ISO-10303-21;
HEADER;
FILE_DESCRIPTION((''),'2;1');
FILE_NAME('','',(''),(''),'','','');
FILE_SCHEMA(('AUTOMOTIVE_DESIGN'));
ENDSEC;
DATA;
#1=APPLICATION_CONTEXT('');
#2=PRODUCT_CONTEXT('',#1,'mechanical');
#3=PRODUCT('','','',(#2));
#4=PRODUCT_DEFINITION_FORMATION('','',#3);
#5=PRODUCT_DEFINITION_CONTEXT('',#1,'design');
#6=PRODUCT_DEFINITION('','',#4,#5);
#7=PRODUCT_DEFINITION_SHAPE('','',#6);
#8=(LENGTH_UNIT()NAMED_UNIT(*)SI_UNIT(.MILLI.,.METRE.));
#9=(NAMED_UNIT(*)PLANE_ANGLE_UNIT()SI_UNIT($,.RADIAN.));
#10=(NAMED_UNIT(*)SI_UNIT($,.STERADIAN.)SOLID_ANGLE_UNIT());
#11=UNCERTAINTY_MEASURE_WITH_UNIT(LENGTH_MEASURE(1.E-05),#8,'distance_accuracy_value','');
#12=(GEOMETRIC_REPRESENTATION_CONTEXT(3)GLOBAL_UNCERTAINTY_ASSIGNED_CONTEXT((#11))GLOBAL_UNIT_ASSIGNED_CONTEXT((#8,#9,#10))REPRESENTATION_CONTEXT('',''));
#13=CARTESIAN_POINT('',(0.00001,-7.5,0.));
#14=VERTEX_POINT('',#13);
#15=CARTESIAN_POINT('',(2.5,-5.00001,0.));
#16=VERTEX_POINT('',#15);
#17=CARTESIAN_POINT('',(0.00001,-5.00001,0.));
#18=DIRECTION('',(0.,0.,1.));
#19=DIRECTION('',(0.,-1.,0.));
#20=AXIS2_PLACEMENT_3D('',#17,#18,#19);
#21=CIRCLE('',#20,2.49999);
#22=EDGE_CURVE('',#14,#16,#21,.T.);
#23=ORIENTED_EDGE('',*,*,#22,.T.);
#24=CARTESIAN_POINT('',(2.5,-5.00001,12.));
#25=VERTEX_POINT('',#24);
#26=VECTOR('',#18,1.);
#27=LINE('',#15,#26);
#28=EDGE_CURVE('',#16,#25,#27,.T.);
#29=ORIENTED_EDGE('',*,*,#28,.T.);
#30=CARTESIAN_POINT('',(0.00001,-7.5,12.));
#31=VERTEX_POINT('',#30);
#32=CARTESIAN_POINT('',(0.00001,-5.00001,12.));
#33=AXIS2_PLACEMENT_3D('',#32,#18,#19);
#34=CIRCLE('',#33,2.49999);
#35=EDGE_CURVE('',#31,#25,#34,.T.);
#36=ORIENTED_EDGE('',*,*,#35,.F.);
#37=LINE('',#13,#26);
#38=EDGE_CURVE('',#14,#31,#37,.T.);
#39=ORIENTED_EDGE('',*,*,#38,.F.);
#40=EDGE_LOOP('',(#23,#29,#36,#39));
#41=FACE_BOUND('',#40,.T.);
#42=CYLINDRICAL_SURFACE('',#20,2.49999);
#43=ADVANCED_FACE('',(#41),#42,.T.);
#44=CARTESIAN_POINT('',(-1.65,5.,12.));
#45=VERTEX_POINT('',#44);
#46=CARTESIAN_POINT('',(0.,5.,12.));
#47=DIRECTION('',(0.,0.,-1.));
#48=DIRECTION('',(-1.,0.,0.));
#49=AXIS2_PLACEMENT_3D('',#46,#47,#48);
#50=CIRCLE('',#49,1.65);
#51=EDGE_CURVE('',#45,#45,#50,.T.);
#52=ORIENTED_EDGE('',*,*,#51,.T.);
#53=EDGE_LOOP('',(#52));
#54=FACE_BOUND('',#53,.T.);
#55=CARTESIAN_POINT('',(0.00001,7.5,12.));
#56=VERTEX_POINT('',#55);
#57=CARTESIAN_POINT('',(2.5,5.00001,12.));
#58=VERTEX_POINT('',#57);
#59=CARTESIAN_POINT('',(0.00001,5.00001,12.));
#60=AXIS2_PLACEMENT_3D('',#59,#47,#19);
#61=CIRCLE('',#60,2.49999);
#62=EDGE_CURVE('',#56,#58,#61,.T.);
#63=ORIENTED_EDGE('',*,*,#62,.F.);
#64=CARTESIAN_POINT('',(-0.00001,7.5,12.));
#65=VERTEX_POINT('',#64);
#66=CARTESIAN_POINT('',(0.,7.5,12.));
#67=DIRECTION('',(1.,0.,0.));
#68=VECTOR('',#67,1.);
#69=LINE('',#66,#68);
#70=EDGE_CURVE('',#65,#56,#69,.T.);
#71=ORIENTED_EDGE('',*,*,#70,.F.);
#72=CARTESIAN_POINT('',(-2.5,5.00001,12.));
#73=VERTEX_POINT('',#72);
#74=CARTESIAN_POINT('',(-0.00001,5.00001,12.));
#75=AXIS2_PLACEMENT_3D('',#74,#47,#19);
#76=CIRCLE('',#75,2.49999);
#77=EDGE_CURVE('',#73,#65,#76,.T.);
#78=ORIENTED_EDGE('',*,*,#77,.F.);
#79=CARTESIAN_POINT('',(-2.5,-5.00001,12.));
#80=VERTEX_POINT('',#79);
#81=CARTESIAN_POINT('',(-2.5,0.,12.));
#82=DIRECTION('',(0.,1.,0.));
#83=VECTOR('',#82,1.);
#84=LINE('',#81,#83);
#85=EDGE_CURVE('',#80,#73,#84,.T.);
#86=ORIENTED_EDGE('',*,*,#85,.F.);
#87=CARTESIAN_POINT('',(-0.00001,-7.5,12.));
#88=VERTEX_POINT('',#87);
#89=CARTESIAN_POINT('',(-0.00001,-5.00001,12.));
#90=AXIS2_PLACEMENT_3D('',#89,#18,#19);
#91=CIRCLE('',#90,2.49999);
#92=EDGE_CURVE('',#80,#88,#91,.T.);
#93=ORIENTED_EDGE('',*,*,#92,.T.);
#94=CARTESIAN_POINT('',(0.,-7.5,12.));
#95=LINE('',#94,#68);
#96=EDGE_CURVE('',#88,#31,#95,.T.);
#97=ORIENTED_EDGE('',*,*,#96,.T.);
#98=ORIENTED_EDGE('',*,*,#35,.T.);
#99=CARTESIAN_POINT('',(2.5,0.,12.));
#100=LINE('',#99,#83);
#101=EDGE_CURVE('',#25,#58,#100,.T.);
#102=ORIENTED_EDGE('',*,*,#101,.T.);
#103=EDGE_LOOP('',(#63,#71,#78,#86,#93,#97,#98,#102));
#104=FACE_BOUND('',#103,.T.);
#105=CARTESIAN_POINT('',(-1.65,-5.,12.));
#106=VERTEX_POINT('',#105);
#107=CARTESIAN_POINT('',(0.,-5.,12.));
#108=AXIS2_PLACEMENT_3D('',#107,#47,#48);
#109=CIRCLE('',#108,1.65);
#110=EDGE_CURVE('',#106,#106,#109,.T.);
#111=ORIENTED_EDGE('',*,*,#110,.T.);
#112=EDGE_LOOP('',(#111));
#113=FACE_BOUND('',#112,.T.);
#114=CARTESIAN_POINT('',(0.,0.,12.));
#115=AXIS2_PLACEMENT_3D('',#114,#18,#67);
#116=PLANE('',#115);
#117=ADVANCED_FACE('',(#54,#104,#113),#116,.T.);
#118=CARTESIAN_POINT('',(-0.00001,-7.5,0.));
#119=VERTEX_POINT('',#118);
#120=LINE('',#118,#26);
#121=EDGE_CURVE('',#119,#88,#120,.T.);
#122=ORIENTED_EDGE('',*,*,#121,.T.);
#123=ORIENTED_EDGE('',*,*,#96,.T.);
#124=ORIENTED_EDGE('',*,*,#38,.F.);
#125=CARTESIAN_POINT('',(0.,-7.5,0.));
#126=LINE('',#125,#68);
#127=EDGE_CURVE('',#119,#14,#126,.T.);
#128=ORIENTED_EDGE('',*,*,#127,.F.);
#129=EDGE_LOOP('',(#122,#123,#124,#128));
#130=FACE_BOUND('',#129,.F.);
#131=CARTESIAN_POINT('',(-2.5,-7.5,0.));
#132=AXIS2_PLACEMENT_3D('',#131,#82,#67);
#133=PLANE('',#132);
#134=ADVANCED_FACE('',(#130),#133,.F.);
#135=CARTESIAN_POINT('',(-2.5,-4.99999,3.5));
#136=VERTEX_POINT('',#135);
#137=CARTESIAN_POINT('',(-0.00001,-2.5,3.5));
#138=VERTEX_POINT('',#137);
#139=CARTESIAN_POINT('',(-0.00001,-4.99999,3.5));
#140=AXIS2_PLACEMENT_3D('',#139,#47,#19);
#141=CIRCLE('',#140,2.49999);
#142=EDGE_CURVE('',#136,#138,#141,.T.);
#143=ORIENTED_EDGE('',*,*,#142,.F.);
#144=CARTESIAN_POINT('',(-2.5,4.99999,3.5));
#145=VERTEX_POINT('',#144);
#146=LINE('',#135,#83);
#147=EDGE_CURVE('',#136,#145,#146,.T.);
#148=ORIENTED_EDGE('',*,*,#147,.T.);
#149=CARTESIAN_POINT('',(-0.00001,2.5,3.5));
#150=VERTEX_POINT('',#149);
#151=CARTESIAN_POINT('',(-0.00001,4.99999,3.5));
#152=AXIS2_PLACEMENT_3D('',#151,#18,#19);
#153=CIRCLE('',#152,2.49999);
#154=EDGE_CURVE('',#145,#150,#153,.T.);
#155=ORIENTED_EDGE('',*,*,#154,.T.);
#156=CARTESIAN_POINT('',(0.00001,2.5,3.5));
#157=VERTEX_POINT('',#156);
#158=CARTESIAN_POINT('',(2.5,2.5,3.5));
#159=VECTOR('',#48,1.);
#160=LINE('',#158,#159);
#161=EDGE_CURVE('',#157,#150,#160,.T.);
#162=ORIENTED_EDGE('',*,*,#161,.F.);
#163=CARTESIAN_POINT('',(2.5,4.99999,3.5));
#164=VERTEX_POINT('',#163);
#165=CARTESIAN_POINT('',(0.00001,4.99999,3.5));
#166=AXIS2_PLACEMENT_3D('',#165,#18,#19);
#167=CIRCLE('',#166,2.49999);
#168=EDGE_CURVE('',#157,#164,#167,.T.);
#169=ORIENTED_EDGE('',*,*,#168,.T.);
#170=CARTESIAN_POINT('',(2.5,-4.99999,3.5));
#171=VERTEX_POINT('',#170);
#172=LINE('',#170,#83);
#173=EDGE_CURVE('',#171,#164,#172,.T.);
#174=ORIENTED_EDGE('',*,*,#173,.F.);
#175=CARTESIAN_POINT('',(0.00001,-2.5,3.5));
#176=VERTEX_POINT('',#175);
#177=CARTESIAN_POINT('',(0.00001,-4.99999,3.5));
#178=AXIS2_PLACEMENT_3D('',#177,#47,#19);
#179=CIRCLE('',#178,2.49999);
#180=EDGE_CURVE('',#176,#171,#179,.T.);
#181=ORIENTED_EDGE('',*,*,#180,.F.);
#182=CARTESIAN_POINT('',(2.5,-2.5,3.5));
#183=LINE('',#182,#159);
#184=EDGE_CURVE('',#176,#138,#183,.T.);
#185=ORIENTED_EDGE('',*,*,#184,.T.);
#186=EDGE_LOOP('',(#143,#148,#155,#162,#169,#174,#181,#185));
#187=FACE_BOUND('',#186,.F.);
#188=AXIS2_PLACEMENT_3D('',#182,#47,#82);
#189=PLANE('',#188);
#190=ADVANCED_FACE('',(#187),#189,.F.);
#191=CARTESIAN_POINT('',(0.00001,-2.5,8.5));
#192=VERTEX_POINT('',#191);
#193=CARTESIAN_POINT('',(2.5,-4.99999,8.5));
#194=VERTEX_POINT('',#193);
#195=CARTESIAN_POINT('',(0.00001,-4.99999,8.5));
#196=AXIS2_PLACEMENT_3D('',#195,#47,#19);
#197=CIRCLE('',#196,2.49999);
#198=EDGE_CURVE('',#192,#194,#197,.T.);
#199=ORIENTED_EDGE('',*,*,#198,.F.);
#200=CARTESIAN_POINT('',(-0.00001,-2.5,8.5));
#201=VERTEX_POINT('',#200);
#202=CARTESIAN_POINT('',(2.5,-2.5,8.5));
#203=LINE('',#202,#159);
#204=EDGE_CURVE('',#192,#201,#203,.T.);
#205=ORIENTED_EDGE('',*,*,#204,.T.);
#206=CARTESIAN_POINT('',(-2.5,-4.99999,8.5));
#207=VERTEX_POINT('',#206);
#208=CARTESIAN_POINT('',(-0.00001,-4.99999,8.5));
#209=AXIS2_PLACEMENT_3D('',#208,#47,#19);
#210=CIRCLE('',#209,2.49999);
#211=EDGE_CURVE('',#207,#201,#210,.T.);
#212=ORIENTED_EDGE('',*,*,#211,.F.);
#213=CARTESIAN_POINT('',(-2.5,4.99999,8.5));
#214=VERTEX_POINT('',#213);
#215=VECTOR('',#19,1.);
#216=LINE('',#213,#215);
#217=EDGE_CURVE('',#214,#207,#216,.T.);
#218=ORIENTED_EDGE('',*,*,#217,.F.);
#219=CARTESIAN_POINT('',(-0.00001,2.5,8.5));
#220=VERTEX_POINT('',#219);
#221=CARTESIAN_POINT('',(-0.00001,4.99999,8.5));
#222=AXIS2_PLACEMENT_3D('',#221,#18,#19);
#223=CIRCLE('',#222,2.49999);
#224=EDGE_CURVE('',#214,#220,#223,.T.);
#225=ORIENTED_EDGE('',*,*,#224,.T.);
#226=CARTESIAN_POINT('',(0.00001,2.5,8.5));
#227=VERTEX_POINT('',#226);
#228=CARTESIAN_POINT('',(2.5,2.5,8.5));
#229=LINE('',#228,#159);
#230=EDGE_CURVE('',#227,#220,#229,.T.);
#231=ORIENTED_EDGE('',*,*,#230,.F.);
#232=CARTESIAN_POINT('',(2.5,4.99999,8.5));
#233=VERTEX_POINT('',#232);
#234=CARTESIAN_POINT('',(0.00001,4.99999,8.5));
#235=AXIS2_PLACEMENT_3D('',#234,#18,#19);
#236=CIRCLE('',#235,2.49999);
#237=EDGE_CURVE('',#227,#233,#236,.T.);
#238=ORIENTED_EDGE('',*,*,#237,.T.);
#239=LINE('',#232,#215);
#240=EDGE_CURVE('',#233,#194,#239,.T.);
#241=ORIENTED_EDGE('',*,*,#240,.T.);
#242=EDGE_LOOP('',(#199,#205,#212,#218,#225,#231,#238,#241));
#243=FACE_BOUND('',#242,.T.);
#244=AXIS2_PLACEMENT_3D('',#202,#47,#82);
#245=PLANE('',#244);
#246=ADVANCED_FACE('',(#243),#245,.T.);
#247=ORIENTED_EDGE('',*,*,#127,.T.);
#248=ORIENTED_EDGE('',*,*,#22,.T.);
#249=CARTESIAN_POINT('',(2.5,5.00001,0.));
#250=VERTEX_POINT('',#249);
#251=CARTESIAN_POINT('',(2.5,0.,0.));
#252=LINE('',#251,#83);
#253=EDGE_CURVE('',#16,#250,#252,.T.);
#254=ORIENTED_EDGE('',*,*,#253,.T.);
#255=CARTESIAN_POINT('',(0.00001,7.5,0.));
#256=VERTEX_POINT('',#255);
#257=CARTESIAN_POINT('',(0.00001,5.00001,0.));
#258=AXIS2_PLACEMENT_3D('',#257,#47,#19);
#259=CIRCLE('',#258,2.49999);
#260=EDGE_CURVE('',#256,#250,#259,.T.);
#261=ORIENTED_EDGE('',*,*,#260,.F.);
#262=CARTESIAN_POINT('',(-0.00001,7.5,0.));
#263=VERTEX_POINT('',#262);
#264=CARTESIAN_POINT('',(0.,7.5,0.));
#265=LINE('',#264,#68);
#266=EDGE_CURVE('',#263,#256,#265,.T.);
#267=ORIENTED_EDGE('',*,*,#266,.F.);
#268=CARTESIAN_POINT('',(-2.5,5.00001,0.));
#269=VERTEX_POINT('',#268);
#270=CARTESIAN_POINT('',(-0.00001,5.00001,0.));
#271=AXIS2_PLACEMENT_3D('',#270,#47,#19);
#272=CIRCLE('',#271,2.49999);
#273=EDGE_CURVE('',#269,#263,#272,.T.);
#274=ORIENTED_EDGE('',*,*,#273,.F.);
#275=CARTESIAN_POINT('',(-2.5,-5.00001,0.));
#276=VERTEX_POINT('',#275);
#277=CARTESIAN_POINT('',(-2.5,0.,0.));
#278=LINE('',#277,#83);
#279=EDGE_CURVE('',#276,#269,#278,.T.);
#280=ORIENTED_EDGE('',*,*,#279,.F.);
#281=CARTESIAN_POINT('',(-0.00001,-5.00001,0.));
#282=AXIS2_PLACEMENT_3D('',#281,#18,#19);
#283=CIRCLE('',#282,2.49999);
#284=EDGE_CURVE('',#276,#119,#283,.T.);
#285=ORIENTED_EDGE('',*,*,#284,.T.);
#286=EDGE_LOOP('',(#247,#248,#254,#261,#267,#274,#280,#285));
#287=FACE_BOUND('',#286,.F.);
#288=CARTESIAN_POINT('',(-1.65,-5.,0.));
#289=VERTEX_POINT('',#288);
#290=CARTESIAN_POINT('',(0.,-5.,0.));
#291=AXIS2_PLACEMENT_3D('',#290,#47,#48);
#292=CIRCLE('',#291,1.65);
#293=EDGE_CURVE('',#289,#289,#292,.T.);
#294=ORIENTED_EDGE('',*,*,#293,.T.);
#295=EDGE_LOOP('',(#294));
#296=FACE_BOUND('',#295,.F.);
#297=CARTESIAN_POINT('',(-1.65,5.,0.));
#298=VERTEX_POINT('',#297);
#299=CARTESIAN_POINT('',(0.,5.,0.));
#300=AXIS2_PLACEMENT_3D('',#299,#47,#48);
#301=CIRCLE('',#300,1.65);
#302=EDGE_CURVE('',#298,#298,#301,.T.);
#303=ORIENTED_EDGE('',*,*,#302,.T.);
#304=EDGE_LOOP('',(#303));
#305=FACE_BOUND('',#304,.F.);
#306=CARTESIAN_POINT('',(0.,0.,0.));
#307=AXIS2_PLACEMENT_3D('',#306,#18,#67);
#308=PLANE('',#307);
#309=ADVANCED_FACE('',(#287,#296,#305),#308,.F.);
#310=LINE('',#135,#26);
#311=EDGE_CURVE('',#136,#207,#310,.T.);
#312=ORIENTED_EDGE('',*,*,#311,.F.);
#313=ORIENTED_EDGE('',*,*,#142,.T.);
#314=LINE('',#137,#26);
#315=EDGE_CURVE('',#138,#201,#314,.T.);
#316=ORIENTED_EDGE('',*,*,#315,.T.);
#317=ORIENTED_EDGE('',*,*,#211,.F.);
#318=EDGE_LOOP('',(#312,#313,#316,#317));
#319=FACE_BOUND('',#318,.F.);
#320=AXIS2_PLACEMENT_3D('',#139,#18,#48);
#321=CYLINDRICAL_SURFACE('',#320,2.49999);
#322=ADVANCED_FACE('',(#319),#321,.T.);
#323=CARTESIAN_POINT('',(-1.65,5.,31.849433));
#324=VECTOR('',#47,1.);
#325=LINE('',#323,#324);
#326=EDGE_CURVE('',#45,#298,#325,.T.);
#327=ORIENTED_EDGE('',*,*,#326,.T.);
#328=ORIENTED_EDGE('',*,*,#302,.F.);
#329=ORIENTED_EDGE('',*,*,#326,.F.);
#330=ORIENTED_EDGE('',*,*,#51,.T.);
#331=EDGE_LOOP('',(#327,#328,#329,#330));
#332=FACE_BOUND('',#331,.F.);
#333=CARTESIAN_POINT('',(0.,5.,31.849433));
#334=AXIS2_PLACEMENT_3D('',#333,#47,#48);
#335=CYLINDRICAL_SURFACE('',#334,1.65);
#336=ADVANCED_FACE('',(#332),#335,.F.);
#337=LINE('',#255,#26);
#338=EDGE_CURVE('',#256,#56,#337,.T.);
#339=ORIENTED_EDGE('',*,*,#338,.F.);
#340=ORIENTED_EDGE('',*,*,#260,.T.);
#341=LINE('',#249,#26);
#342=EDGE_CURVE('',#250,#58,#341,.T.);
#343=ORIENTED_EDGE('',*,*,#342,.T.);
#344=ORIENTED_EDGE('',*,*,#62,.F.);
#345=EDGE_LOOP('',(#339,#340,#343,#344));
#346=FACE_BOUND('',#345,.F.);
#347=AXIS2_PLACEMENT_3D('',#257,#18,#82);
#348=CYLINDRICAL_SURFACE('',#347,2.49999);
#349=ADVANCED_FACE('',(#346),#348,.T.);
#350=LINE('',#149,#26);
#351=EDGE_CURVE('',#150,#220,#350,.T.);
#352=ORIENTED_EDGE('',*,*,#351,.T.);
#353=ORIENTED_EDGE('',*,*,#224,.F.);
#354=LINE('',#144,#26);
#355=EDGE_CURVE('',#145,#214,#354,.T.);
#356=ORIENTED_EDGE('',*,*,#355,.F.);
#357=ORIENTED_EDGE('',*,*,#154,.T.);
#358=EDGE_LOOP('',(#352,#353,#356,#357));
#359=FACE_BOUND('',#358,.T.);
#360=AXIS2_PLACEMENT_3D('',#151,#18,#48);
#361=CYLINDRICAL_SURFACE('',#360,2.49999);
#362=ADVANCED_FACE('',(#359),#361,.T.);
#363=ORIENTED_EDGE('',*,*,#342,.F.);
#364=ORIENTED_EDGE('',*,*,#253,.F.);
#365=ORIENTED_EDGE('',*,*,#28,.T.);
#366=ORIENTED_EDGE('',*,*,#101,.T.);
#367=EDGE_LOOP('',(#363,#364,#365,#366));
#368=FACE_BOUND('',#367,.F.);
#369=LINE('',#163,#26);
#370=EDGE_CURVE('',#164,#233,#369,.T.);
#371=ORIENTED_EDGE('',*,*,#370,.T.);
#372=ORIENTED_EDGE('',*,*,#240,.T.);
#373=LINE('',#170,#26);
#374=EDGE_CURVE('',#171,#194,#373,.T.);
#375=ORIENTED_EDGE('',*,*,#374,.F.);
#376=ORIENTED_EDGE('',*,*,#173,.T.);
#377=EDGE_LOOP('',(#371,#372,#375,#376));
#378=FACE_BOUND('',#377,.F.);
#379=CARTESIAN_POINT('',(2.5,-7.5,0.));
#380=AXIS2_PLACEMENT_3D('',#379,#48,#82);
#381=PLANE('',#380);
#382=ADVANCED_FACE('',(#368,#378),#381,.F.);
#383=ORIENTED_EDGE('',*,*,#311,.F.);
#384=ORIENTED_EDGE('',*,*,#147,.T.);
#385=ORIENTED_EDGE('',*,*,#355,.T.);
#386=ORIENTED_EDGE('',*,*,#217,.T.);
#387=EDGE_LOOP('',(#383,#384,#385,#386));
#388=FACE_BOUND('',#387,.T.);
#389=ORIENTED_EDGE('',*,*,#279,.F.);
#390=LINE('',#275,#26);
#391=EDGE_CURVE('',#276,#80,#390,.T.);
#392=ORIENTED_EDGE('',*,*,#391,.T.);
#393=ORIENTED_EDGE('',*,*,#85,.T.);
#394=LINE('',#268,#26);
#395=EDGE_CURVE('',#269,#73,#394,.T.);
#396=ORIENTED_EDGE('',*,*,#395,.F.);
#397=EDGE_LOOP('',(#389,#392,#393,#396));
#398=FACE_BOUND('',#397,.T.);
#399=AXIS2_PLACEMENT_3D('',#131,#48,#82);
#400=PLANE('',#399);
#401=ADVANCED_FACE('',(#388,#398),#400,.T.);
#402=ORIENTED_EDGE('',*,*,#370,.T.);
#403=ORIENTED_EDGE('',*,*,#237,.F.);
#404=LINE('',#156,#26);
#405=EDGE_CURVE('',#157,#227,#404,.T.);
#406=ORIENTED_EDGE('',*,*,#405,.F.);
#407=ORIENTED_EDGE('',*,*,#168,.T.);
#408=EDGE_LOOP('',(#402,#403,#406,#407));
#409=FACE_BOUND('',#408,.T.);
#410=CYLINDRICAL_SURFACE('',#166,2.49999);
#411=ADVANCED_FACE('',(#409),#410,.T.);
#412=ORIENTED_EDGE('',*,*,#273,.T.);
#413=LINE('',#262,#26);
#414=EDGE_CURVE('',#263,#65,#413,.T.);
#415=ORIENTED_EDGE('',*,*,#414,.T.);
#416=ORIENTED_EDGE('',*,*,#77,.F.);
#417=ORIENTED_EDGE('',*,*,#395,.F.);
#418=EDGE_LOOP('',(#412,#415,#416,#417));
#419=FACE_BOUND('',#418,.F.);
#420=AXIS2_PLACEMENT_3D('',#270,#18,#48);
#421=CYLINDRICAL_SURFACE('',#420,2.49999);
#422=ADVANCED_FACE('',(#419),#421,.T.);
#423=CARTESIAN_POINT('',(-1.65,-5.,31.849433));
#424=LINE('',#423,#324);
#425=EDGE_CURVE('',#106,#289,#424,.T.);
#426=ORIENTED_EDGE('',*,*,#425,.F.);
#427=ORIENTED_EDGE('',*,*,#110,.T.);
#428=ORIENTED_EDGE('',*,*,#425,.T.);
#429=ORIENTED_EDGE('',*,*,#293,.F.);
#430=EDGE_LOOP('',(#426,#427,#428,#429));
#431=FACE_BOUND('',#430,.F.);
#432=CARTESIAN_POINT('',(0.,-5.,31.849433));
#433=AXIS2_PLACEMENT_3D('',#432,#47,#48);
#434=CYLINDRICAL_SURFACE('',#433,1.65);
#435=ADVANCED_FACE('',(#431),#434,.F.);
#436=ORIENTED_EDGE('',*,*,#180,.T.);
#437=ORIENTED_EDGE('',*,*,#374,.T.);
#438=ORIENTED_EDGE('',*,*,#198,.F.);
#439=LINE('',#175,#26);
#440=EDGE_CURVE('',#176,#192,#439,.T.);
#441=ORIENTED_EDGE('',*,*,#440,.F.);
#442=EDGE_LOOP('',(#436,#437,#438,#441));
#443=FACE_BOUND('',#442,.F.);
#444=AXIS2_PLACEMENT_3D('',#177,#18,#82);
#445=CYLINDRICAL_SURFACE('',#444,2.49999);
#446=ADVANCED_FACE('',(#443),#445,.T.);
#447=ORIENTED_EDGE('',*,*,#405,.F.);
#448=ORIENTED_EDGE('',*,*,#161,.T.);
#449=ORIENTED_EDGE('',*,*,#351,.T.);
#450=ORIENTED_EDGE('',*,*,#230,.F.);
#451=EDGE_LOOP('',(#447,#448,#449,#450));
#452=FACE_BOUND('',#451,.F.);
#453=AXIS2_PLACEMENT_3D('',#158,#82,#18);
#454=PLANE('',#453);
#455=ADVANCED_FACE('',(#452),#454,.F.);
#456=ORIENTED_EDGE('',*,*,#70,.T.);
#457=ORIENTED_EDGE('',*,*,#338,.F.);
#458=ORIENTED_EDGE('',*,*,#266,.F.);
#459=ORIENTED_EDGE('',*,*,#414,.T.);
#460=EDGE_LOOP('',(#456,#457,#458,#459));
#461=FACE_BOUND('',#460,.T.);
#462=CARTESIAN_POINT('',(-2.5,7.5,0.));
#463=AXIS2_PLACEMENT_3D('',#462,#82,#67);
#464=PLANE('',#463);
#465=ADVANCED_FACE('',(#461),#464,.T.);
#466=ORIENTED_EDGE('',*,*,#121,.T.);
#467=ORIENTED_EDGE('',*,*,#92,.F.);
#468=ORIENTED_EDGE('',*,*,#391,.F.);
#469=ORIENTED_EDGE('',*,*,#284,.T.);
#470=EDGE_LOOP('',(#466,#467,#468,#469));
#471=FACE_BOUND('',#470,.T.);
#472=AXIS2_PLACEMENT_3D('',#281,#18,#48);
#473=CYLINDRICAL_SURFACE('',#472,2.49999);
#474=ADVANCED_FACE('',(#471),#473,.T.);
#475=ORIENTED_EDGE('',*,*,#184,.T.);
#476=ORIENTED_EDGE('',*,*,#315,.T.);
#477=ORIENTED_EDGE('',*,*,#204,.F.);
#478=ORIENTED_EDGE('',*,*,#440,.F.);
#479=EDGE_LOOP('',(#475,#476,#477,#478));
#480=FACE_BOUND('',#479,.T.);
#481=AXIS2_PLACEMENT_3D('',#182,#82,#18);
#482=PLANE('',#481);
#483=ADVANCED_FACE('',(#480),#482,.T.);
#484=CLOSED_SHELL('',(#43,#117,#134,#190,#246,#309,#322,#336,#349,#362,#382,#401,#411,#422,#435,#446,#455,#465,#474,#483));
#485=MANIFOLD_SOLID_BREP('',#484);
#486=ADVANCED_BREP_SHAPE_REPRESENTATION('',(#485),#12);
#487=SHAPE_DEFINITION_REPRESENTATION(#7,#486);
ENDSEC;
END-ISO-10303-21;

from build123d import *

# Parameters (mm, degrees)
F0_W     = 5
F0_H     = 15
F1_DEPTH = 12
F2_W     = 5
F2_H     = 5
F3_DEPTH = 5
F4_R     = 2.49999
F6_D     = 3.3


# Not quite as in the source:
# - a fillet or chamfer is up to 0.001 mm smaller than in the source, because OpenCascade refuses the exact size


with BuildPart() as f1:
    # F0 (on Top) → F1 (new body)
    with BuildSketch(Plane.XY):
        Rectangle(F0_W, F0_H)
    extrude(amount=F1_DEPTH)

    # F2 (on face) → F3 (cut, through all)
    with BuildSketch(Plane.YZ.offset(2.5)):
        with Locations((0, 6)):
            Rectangle(F2_W, F2_H)
    extrude(amount=-F3_DEPTH, mode=Mode.SUBTRACT)

    # F4 (radius 2.5 in the source; OpenCascade refuses exactly that, so slightly less here)
    f4_edges = [f1.edges().sort_by_distance(p)[0] for p in [
        (2.5, -7.5, 6),
        (-2.5, -7.5, 6),
        (2.5, 7.5, 6),
        (-2.5, 7.5, 6),
        (-2.5, 2.5, 6),
        (-2.5, -2.5, 6),
        (2.5, -2.5, 6),
        (2.5, 2.5, 6),
    ]]
    fillet(f4_edges, radius=F4_R)

    # F6 (through all)
    with Locations(Plane.XY.offset(12)):
        with Locations((0, 5), (0, -5)):
            Hole(F6_D / 2)


solid = f1.part
